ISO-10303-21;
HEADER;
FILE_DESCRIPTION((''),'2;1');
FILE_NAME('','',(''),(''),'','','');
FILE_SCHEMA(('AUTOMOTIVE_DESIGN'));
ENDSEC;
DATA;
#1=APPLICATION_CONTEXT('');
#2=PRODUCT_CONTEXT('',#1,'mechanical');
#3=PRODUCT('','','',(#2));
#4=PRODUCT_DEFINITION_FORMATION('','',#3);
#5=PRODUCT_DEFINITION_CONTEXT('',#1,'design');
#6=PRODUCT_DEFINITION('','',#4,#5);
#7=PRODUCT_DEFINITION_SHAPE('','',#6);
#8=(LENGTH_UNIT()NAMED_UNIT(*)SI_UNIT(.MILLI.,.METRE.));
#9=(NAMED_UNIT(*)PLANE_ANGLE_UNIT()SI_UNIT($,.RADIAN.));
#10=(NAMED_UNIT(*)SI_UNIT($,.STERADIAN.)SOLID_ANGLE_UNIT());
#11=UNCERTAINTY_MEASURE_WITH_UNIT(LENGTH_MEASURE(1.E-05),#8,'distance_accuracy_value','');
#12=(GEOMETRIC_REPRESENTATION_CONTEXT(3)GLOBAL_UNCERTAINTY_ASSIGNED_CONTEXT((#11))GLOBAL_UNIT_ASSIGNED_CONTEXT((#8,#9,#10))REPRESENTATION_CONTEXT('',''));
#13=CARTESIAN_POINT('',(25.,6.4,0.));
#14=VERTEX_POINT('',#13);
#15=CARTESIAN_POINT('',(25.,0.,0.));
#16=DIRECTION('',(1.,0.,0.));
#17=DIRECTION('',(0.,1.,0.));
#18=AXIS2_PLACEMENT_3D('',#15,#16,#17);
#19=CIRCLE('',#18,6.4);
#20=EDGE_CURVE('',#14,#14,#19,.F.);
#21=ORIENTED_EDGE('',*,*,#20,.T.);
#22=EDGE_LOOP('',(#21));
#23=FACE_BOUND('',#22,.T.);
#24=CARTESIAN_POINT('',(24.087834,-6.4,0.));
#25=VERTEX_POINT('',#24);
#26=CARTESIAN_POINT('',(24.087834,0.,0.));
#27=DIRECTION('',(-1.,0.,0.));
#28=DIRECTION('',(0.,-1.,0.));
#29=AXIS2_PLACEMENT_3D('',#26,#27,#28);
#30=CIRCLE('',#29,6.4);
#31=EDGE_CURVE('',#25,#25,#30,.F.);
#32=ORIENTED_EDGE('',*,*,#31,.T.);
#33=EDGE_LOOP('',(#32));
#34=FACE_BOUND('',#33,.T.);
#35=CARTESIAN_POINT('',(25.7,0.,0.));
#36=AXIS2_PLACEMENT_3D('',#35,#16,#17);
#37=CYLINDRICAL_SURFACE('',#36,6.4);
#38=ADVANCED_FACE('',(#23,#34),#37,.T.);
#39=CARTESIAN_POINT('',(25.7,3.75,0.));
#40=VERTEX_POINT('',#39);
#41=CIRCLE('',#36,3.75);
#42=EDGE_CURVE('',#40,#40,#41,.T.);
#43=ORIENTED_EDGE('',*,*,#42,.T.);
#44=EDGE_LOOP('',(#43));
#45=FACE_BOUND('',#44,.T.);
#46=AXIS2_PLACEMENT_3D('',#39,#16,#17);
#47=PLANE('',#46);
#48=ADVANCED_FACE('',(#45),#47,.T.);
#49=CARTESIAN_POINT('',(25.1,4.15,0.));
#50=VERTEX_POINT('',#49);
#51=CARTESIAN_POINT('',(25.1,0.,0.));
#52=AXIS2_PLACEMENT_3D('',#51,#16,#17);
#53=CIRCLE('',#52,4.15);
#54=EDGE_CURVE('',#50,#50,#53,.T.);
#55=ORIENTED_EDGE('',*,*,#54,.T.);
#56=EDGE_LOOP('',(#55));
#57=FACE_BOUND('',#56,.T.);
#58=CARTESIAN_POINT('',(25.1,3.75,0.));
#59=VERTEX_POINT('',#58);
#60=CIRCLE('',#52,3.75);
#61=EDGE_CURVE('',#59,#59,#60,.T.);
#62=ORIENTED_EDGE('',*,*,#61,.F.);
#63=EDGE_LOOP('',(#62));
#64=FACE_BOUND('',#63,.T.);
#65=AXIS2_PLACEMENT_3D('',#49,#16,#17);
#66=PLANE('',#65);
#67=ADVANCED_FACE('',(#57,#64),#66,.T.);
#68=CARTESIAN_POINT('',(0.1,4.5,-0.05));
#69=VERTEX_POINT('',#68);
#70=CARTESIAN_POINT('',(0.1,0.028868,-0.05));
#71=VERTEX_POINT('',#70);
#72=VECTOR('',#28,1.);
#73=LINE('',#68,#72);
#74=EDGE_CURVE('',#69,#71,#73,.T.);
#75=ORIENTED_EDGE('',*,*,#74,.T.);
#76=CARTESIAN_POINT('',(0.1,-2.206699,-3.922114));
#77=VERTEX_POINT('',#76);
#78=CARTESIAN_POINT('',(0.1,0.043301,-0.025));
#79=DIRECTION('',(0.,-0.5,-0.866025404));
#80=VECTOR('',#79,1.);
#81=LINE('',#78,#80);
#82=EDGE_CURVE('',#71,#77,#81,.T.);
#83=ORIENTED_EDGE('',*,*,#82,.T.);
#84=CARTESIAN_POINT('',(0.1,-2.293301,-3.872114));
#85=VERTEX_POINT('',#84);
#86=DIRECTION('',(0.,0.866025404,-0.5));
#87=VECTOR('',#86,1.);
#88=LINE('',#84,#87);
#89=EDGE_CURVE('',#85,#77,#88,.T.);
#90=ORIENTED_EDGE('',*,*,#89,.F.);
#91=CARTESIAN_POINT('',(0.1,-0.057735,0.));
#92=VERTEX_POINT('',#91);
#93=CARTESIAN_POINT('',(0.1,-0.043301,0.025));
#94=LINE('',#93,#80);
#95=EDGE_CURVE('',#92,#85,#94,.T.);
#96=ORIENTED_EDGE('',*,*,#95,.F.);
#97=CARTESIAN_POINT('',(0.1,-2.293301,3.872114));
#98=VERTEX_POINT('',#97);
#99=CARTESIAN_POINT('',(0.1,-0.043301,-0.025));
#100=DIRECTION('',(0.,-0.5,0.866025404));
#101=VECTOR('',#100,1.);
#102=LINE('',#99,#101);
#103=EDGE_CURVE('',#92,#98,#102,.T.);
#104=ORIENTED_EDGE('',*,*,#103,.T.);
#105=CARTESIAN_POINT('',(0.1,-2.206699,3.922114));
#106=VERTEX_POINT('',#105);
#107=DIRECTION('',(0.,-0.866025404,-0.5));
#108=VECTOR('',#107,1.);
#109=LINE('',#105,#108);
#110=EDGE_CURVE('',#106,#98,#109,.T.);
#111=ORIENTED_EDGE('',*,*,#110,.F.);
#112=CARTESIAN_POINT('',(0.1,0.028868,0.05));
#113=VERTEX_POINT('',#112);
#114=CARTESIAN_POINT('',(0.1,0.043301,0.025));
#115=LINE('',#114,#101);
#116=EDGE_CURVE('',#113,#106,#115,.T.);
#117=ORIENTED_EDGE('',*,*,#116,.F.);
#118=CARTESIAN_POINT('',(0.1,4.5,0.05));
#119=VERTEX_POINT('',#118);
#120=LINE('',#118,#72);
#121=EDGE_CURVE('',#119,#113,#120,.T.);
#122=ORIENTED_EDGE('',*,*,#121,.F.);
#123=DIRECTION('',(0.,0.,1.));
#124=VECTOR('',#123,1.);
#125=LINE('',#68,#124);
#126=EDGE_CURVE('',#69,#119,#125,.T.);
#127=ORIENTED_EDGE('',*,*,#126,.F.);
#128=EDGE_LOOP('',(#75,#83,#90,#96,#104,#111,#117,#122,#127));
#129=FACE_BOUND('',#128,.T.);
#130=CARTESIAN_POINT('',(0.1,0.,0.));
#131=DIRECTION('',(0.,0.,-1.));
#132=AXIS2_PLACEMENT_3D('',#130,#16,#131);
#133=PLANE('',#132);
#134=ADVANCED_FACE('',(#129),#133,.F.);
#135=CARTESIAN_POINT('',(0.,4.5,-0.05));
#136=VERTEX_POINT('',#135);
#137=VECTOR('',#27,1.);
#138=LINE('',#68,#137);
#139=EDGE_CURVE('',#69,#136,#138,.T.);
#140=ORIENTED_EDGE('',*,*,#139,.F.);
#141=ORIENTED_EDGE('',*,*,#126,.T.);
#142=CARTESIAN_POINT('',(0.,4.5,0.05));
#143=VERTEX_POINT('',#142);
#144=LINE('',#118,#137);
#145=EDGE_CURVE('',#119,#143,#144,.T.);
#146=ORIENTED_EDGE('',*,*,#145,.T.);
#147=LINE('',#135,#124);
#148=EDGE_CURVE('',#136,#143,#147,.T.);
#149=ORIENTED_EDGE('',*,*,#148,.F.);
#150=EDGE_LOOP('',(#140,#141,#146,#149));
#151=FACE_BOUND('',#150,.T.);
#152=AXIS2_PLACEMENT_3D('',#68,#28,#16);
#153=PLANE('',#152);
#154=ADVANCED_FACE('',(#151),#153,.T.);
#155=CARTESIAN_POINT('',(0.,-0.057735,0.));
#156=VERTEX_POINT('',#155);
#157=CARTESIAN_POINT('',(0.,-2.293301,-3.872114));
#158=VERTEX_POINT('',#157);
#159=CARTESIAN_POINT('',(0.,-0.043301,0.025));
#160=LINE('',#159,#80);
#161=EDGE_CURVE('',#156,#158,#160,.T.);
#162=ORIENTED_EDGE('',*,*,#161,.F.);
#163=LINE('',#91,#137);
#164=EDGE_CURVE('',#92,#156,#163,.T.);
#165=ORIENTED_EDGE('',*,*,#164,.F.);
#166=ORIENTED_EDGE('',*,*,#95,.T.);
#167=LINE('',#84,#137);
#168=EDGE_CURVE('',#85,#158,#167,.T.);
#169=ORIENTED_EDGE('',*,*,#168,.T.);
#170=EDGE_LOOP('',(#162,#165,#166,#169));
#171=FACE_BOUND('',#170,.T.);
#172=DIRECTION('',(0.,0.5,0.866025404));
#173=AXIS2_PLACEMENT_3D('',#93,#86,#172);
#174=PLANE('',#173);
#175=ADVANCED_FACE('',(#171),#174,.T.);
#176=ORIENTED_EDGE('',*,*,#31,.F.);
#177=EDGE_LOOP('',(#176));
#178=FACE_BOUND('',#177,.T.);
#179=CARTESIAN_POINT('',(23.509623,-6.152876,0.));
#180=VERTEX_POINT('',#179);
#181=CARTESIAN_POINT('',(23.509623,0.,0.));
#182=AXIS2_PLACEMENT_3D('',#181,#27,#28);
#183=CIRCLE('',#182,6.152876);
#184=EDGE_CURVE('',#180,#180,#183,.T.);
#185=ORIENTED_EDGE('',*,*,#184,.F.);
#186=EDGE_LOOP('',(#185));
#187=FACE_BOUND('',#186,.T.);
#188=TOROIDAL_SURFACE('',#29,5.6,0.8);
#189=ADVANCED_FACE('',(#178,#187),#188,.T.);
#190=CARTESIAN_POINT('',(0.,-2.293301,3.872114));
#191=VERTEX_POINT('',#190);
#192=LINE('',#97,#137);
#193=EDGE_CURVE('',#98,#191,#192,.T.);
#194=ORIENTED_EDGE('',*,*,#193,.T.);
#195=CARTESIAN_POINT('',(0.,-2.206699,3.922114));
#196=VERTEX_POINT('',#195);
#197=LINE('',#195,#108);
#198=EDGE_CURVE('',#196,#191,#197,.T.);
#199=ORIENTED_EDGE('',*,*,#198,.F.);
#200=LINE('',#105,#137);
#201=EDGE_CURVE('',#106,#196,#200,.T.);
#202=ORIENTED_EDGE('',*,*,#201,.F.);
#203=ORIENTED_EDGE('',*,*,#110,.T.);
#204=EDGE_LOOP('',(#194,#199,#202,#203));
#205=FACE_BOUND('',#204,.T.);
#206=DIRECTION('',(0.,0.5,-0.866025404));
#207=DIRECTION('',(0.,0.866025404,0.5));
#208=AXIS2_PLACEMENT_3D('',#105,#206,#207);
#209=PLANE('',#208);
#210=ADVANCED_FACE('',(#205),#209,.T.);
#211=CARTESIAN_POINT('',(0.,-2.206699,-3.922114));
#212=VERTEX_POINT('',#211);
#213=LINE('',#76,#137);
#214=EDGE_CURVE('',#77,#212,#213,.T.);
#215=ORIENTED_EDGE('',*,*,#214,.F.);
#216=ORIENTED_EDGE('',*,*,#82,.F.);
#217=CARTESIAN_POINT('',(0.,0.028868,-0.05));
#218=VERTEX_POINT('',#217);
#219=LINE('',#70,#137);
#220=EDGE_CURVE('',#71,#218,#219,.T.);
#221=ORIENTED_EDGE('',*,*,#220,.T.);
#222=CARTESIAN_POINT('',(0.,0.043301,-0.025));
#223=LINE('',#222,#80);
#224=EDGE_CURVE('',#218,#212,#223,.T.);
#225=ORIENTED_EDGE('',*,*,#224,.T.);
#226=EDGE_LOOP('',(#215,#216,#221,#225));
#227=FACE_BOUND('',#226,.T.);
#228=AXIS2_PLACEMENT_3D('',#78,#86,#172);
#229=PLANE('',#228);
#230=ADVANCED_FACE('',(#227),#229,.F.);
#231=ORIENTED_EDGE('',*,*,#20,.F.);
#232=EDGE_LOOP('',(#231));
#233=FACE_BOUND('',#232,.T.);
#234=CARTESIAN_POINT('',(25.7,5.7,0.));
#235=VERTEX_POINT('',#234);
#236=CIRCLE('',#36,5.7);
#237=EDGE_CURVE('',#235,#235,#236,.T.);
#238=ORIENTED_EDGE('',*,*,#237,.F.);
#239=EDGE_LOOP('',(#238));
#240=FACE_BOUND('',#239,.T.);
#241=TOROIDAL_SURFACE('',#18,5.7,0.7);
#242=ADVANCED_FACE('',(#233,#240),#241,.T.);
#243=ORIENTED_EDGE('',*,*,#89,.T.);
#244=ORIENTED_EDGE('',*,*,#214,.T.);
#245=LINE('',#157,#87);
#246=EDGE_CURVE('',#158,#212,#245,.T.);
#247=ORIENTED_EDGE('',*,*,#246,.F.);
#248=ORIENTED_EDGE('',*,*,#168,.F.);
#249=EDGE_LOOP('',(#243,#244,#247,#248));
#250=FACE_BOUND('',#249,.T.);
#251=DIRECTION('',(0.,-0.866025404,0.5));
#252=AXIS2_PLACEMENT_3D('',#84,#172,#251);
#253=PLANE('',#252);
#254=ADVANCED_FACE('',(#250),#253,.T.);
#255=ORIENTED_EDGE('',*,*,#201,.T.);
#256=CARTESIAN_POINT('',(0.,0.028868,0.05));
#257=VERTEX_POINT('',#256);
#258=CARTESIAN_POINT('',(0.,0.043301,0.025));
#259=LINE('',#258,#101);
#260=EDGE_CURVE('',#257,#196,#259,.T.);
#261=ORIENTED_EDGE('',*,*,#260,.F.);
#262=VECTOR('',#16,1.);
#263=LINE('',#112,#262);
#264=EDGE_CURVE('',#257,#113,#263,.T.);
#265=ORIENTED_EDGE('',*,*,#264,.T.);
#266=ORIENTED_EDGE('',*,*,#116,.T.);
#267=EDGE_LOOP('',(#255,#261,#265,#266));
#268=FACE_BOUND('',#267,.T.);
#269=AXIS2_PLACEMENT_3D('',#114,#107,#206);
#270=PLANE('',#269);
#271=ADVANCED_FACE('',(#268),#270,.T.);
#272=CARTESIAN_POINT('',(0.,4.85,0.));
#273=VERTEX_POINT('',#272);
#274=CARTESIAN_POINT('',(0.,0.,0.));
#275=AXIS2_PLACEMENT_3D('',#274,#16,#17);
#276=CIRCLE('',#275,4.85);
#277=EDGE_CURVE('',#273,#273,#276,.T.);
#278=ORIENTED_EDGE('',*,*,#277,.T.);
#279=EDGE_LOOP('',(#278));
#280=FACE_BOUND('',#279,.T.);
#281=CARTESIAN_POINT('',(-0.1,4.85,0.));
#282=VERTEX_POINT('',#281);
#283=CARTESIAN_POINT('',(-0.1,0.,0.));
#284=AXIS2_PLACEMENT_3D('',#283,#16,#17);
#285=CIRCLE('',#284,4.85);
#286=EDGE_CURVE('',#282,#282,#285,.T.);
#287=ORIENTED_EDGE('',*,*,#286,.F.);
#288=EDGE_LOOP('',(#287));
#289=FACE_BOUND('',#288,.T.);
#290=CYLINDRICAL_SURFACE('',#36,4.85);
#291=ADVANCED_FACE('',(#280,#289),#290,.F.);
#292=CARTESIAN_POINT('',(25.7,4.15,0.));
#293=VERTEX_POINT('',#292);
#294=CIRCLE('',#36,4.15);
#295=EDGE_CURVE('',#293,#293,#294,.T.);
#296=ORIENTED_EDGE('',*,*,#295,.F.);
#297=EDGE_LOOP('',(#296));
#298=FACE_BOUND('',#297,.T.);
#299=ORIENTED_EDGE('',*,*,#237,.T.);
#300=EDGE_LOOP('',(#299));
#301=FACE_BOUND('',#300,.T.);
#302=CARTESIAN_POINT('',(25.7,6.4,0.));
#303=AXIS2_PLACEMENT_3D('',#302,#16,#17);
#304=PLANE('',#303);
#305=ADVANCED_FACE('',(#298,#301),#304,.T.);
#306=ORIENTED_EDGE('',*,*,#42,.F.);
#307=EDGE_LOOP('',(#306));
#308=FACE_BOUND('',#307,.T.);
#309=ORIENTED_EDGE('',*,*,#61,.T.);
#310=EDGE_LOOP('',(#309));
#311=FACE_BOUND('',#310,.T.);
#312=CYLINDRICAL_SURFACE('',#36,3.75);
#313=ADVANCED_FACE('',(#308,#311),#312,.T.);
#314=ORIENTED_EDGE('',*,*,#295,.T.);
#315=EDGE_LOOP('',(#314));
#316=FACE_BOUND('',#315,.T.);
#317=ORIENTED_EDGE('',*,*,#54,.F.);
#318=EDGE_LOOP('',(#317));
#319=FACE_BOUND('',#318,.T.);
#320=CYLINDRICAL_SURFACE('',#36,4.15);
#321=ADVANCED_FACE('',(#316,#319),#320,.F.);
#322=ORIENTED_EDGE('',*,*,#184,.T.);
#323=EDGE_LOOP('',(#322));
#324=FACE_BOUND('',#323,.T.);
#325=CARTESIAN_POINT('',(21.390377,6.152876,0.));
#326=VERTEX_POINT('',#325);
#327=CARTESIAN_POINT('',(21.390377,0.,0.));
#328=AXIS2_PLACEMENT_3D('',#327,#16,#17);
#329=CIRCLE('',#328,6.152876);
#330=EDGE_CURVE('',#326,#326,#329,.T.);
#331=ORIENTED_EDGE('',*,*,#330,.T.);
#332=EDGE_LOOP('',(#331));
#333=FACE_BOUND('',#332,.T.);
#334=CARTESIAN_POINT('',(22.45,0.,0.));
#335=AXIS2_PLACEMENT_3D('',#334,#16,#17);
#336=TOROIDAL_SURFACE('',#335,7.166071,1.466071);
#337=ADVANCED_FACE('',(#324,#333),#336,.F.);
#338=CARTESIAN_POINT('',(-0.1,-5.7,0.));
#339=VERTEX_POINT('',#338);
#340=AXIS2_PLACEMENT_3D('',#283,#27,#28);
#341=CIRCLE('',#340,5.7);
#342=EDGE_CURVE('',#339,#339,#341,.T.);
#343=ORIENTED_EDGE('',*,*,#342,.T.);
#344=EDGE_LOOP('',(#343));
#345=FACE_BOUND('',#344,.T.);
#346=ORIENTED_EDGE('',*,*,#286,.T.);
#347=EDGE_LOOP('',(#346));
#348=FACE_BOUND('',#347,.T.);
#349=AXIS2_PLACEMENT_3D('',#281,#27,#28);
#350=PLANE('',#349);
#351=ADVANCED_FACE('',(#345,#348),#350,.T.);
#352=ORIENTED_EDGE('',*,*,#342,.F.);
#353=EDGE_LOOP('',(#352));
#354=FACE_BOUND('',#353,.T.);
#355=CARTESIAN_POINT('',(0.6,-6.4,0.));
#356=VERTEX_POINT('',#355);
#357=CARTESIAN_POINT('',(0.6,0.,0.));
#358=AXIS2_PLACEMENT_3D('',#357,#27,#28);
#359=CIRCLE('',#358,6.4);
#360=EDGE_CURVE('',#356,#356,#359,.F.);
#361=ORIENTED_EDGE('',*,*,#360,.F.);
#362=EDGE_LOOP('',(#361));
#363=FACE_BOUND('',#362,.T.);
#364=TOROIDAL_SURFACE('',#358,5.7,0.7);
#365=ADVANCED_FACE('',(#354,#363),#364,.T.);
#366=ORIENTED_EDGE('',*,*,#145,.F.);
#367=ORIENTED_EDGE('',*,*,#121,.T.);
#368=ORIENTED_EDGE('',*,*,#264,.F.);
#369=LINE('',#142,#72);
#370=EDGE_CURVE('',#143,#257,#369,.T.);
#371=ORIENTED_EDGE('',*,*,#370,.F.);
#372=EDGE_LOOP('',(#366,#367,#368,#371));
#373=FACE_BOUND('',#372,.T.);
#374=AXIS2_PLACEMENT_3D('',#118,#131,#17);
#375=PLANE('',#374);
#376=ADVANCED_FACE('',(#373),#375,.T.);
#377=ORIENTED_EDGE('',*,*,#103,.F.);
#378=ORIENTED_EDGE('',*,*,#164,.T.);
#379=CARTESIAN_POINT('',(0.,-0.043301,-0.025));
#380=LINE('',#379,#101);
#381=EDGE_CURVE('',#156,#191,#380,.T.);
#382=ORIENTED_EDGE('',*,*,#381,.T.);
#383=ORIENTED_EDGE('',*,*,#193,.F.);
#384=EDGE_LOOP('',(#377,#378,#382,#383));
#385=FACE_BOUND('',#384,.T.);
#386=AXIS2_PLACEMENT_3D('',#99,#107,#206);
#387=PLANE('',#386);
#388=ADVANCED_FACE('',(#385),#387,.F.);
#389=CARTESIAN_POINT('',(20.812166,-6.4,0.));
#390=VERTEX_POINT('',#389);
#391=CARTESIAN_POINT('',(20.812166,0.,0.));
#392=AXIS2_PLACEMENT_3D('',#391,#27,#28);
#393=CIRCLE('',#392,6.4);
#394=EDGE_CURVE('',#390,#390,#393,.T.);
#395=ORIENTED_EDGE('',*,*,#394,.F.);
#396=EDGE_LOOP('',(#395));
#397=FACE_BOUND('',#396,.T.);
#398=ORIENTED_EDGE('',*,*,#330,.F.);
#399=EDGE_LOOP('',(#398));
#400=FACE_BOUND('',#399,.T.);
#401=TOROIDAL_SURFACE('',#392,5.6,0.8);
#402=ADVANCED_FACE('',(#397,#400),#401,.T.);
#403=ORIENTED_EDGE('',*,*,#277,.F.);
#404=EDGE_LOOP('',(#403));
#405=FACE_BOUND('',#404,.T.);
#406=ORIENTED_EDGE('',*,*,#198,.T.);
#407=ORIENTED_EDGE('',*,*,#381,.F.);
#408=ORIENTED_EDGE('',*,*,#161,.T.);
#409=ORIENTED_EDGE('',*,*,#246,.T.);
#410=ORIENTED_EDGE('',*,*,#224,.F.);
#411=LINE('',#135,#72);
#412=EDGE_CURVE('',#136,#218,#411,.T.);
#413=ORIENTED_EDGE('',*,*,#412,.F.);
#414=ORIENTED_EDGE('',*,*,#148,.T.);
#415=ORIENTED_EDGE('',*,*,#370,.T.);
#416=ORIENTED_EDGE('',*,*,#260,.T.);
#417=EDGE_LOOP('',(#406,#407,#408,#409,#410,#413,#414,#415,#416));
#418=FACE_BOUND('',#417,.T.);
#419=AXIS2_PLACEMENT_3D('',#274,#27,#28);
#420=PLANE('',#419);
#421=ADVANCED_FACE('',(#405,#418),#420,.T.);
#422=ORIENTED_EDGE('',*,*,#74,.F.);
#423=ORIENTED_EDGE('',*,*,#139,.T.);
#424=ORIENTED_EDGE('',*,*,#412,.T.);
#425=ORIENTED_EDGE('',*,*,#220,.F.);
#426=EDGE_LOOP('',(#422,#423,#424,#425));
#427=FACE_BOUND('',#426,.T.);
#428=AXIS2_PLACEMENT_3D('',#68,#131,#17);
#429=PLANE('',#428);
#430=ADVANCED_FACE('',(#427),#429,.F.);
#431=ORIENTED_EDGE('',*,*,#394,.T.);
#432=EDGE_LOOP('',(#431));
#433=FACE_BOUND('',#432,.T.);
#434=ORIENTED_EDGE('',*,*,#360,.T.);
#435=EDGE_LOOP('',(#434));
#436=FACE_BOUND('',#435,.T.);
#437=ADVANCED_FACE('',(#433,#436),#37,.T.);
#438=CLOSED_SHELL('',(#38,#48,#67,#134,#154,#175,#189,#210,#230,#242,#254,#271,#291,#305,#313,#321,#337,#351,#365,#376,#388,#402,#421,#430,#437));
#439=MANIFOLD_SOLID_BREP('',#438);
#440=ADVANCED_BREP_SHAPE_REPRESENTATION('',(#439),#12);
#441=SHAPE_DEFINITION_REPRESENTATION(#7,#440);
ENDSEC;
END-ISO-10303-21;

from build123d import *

# Parameters (mm, degrees)
FILLET_1_R          = 0.7
FILLET_4_R          = 0.8
CUT_EXTRUDE_START   = -0.1
CUT_EXTRUDE_3_DEPTH = 0.1


# Read off the part's stored shape, not the designer's step: Вырез-Вытянуть-Тонкостенный3
with BuildPart() as part:
    # Эскиз2 → Повернуть1 (revolve)
    with BuildSketch(Plane.XY):
        with BuildLine():
            Line((0, 0), (0, 4.85))
            Line((0, 4.85), (-0.1, 4.85))
            Line((-0.1, 4.85), (-0.1, 6.4))
            Line((-0.1, 6.4), (21.2, 6.4))
            ThreePointArc((21.2, 6.4), (22.45, 5.7), (23.7, 6.4))
            Line((23.7, 6.4), (25.7, 6.4))
            Line((25.7, 6.4), (25.7, 4.15))
            Line((25.7, 4.15), (25.1, 4.15))
            Line((25.1, 4.15), (25.1, 3.75))
            Line((25.1, 3.75), (25.7, 3.75))
            Line((25.7, 3.75), (25.7, 0))
            Line((25.7, 0), (0, 0))
        make_face()
    revolve(axis=Axis((25.7, 0, 0), (-1, 0, 0)))

    # Скругление1
    fillet_1_edges = [part.edges().sort_by_distance(p)[0] for p in [
        (25.7, -6.4, 0),
        (-0.1, -6.4, 0),
    ]]
    fillet(fillet_1_edges, radius=FILLET_1_R)

    # Скругление4
    fillet_4_edges = [part.edges().sort_by_distance(p)[0] for p in [
        (21.2, -6.4, 0),
        (23.7, -6.4, 0),
    ]]
    fillet(fillet_4_edges, radius=FILLET_4_R)

    # Вырез-Вытянуть-Тонкостенный3 outline → Вырез-Вытянуть-Тонкостенный3 (cut)
    with BuildSketch(Plane.ZY.offset(CUT_EXTRUDE_START)):
        Polygon((-3.872114317, -2.29330127), (0, -0.057735027), (3.872114317, -2.29330127), (3.922114317, -2.20669873), (0.05, 0.028867513), (0.05, 4.5), (-0.05, 4.5), (-0.05, 0.028867513), (-3.922114317, -2.20669873), align=None)
    extrude(amount=CUT_EXTRUDE_3_DEPTH, mode=Mode.SUBTRACT)


solid = part.part
